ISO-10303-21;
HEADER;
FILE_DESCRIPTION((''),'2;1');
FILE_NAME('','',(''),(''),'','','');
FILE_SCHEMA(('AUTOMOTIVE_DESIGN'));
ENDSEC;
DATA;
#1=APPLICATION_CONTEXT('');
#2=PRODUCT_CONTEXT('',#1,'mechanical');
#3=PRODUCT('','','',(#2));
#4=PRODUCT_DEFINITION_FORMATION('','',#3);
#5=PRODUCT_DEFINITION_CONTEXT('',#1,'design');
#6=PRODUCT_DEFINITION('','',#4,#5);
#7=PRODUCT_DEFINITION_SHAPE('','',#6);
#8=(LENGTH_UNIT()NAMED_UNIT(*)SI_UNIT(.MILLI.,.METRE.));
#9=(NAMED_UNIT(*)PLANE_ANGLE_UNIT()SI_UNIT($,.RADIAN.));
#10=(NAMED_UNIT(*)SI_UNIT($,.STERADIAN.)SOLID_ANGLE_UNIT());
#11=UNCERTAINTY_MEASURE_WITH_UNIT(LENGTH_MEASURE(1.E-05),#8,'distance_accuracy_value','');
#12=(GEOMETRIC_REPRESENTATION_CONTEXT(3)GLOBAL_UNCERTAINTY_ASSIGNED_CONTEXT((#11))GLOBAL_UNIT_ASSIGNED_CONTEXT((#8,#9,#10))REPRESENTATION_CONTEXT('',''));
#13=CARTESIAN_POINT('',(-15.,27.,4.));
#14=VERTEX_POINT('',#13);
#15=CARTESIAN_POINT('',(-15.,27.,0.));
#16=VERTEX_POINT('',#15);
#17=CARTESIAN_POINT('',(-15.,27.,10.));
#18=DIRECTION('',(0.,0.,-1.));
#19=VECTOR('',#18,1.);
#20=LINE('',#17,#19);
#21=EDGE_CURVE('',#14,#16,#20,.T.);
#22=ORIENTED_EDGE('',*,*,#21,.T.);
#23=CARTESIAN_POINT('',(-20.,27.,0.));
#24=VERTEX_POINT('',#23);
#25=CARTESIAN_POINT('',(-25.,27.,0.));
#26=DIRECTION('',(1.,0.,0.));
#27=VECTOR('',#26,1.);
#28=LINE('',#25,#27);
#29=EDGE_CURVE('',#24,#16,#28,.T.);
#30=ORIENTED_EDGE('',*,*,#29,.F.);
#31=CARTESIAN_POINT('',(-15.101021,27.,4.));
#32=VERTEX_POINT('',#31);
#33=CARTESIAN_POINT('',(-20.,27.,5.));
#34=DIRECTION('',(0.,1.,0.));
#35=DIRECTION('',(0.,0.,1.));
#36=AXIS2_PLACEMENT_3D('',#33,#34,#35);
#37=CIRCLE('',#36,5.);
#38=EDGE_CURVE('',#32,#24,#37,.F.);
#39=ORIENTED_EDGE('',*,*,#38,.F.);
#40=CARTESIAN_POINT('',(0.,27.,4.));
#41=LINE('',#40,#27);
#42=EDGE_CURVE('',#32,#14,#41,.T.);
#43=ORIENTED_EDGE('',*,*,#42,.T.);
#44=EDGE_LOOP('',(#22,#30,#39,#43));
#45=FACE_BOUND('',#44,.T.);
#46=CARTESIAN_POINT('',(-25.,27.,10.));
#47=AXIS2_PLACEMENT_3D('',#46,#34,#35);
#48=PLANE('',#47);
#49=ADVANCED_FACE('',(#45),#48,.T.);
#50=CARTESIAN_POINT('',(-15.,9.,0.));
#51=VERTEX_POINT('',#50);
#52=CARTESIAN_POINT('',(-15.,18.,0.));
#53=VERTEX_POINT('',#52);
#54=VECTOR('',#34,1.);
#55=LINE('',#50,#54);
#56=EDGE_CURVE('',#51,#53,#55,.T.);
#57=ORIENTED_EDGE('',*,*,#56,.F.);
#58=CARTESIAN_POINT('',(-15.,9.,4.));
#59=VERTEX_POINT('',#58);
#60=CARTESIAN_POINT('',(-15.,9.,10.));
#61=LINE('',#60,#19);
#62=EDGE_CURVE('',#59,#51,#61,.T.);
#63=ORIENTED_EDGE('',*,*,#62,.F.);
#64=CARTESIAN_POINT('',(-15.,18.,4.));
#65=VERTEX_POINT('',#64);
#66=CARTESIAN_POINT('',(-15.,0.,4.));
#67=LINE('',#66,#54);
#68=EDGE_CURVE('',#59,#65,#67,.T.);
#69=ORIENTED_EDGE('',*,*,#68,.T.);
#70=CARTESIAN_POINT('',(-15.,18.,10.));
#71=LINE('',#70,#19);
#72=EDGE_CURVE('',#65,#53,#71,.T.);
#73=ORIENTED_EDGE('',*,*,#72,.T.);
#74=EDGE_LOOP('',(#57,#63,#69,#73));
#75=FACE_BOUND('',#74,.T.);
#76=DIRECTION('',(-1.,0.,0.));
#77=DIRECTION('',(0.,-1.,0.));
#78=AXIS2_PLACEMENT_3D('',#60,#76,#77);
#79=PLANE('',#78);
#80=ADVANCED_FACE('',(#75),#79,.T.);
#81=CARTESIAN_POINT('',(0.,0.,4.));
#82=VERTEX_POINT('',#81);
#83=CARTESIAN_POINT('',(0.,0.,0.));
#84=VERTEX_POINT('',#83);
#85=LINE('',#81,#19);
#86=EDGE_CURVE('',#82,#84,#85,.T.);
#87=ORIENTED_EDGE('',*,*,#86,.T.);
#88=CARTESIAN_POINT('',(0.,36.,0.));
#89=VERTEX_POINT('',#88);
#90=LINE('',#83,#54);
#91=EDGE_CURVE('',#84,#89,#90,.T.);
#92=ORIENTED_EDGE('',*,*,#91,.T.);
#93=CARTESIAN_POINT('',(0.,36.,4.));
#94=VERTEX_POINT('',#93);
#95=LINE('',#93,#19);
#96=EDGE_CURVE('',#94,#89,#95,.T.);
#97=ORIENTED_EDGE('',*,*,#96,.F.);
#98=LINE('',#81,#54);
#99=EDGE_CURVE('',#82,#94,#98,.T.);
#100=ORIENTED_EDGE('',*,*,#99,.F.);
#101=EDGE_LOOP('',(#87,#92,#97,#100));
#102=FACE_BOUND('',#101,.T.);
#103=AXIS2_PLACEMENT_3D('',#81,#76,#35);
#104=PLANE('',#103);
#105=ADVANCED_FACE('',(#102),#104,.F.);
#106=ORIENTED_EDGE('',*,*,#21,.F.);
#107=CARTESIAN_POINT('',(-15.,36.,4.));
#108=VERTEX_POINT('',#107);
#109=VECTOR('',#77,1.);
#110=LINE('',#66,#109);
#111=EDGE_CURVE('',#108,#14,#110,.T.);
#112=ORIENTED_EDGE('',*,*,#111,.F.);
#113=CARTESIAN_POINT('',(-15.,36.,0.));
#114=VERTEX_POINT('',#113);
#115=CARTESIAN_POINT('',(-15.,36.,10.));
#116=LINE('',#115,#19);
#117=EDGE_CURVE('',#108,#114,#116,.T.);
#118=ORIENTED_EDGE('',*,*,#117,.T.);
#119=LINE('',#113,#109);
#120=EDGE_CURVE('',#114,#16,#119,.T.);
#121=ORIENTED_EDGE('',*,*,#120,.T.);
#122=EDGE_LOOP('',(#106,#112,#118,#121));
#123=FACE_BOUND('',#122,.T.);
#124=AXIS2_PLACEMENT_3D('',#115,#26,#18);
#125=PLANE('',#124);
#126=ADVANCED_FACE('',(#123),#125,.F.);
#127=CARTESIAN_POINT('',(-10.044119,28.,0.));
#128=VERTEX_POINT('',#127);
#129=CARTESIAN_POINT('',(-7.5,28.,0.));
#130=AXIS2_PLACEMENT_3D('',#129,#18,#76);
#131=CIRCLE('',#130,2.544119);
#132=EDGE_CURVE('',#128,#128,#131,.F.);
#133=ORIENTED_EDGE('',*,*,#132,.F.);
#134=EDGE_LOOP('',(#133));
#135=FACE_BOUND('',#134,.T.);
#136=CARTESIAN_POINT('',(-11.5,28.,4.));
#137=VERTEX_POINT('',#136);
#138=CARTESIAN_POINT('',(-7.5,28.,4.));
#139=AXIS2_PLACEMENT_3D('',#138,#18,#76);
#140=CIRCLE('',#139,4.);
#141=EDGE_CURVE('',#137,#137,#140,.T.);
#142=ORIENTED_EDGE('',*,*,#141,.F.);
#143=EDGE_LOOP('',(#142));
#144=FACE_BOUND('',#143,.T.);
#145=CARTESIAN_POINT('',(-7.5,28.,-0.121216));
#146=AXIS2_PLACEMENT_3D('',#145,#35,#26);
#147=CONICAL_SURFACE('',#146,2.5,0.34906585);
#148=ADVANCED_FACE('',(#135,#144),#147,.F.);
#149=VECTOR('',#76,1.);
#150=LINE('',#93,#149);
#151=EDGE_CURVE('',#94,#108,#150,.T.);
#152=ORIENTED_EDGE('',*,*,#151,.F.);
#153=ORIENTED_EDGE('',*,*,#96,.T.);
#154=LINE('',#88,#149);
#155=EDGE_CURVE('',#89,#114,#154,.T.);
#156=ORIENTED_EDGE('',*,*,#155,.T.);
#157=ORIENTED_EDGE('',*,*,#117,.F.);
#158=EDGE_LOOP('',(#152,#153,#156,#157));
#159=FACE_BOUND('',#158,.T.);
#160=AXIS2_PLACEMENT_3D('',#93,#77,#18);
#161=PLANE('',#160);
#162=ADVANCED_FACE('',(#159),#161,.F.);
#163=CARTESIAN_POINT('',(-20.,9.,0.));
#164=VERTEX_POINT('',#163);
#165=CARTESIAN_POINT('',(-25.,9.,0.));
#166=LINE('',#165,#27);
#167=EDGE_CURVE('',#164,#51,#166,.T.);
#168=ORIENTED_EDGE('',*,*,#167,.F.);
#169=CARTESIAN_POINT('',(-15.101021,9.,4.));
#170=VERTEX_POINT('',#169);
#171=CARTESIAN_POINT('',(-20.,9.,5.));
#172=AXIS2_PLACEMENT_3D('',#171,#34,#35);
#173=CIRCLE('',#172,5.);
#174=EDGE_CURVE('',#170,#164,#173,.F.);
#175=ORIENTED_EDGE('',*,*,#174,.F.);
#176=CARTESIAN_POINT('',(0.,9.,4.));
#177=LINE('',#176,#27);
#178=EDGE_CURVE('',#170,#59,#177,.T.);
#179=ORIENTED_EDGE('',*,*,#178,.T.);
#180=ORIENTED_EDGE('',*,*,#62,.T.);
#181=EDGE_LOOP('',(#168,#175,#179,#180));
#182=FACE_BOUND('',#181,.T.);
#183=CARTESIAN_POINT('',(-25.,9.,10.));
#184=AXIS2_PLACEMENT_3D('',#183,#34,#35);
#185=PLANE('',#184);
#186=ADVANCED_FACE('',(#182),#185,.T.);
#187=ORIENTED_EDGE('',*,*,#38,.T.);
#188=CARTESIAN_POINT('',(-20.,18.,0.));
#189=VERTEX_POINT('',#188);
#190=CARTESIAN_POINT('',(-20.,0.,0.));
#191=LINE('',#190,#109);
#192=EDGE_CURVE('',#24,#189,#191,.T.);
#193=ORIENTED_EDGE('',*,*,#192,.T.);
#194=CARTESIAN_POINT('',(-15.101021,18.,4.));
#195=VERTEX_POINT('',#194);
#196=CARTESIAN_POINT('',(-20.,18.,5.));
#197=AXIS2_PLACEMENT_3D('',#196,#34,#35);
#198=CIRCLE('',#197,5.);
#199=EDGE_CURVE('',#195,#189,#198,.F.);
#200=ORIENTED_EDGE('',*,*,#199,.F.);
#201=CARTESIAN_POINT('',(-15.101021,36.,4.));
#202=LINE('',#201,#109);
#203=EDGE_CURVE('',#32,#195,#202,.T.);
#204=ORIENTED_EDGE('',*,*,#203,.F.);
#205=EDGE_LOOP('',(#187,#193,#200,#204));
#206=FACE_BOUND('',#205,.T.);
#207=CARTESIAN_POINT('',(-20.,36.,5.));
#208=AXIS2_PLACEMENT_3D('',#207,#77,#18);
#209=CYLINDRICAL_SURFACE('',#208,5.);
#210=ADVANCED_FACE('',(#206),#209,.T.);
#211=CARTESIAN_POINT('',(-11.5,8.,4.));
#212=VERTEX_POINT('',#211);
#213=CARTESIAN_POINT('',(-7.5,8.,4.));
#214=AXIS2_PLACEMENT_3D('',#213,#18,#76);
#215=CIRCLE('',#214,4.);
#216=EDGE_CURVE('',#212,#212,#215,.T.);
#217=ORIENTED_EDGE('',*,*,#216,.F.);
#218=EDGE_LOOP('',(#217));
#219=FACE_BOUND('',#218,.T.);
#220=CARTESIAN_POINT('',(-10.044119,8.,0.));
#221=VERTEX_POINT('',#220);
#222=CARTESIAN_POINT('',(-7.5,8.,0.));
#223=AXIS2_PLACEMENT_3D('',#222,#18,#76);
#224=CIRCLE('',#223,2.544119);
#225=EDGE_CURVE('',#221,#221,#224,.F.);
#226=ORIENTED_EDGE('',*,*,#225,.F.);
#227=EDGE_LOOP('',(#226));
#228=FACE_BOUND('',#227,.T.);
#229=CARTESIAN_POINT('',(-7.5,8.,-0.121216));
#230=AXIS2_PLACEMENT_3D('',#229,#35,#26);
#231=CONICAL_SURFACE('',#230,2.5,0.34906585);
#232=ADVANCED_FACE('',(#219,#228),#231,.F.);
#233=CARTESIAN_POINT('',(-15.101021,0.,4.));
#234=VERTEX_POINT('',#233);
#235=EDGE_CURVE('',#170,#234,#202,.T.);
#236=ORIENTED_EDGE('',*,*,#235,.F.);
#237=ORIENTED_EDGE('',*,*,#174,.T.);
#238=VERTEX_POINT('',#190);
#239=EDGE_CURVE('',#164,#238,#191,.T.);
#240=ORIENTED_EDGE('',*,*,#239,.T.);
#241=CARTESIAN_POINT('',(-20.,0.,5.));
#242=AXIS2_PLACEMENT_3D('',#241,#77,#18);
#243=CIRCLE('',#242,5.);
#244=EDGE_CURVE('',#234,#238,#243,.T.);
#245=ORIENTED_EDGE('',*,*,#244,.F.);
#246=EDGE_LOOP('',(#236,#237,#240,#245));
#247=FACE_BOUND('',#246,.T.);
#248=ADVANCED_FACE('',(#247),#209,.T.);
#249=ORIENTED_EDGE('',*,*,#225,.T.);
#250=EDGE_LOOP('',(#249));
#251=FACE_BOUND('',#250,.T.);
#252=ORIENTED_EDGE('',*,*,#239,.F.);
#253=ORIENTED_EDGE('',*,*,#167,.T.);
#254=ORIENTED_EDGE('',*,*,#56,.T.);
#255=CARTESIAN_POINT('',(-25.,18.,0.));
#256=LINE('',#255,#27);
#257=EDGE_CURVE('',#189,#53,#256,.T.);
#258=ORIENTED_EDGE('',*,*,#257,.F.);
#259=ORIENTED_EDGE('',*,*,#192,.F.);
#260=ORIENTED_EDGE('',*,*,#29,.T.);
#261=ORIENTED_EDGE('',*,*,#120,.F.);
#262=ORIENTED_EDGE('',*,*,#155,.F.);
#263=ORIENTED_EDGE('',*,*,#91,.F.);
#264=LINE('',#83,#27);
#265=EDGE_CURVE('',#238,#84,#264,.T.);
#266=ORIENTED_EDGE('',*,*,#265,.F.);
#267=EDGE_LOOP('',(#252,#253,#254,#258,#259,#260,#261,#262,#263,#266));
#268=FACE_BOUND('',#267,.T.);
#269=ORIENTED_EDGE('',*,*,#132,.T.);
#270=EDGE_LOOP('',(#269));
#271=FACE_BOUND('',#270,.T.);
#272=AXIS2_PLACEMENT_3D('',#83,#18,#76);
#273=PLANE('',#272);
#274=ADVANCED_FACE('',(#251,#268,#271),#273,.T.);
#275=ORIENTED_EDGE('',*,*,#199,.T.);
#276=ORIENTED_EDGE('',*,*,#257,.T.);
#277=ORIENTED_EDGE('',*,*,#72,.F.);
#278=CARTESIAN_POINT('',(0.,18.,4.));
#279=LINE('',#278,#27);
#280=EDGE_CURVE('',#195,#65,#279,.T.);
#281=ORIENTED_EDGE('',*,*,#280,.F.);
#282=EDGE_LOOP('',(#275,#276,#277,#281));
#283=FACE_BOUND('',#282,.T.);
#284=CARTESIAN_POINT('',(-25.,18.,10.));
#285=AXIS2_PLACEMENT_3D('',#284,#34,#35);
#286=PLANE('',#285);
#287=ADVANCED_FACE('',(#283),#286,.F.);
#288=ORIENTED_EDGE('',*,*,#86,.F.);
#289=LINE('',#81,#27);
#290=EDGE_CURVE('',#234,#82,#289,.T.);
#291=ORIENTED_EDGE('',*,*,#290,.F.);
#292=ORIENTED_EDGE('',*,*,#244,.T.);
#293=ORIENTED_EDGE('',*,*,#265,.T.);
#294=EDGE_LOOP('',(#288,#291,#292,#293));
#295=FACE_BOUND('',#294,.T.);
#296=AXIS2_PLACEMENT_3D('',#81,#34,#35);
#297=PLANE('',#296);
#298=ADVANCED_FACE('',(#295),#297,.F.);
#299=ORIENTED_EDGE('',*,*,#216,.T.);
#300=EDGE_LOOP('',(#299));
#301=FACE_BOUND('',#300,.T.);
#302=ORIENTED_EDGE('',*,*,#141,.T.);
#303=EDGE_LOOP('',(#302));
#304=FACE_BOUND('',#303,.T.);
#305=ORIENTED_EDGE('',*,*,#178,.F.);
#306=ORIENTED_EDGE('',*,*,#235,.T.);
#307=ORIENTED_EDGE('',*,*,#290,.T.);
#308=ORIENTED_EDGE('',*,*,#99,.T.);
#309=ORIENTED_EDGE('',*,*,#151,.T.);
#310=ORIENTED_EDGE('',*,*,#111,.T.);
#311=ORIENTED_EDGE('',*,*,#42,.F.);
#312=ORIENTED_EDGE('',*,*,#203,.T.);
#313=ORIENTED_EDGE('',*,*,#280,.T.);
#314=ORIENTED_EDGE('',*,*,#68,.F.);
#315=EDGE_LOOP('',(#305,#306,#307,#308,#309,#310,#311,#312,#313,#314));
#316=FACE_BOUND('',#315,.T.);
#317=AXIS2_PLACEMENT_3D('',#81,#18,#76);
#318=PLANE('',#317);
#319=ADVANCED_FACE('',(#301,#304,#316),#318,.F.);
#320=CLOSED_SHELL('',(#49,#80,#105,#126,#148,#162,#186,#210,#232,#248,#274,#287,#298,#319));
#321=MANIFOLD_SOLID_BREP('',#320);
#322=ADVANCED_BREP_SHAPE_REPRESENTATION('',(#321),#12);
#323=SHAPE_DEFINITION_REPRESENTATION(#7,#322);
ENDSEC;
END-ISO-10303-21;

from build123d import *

# Parameters (mm, degrees)
SKETCH3_W           = 36
SKETCH3_H           = 20
SKETCH3_R           = 2.5
BOSS_EXTRUDE2_DEPTH = 4
SKETCH4_R           = 5
BOSS_EXTRUDE3_DEPTH = 36
CHAMFER1_SIZE       = 1.5
CHAMFER1_SIZE_2     = 4.121216129
SKETCH5_W           = 10
SKETCH5_H           = 9
CUT_EXTRUDE2_DEPTH  = 45.955533586


with BuildPart() as part:
    # Sketch3 → Boss-Extrude2 (new body)
    with BuildSketch(Plane(origin=(0, 0, 0), x_dir=(0, 1, 0), z_dir=(0, 0, 1))):
        with Locations((18, 10)):
            Rectangle(SKETCH3_W, SKETCH3_H)
        with Locations(Location((8, 7.5, 0), (0, 0, 270))):
            Circle(SKETCH3_R, mode=Mode.SUBTRACT)
        with Locations(Location((28, 7.5, 0), (0, 0, 270))):
            Circle(SKETCH3_R, mode=Mode.SUBTRACT)
    extrude(amount=BOSS_EXTRUDE2_DEPTH)

    # Sketch4 → Boss-Extrude3 (add, through all)
    with BuildSketch(Plane.XZ):
        with Locations((-20, 5)):
            Circle(SKETCH4_R)
    extrude(amount=-BOSS_EXTRUDE3_DEPTH)

    # Chamfer1
    # the kernel refuses this chamfer: 4.121216129, 1.5 mm, written as the material it takes off along each edge
    with BuildSketch(Plane(origin=(-7.5, 28, 4), x_dir=(1, 0, 0), z_dir=(0, -1, 0))) as chamfer1_piece_1:
        Polygon((2.5 + CHAMFER1_SIZE, 0), (2.5, -CHAMFER1_SIZE_2), (2.5, 0), align=None)
    revolve(axis=Axis((-7.5, 28, 4), (0, 0, 1)), mode=Mode.SUBTRACT)
    with BuildSketch(Plane(origin=(-7.5, 8, 4), x_dir=(1, 0, 0), z_dir=(0, -1, 0))) as chamfer1_piece_2:
        Polygon((2.5 + CHAMFER1_SIZE, 0), (2.5, -CHAMFER1_SIZE_2), (2.5, 0), align=None)
    revolve(axis=Axis((-7.5, 8, 4), (0, 0, 1)), mode=Mode.SUBTRACT)

    # Sketch5 → Cut-Extrude2 (cut, through all)
    with BuildSketch(Plane(origin=(0, 0, 0), x_dir=(1, 0, 0), z_dir=(0, 0, -1))):
        with Locations((-20, -13.5)):
            Rectangle(SKETCH5_W, SKETCH5_H)
        with Locations((-20, -31.5)):
            Rectangle(SKETCH5_W, SKETCH5_H)
    extrude(amount=-CUT_EXTRUDE2_DEPTH, mode=Mode.SUBTRACT)


solid = part.part
